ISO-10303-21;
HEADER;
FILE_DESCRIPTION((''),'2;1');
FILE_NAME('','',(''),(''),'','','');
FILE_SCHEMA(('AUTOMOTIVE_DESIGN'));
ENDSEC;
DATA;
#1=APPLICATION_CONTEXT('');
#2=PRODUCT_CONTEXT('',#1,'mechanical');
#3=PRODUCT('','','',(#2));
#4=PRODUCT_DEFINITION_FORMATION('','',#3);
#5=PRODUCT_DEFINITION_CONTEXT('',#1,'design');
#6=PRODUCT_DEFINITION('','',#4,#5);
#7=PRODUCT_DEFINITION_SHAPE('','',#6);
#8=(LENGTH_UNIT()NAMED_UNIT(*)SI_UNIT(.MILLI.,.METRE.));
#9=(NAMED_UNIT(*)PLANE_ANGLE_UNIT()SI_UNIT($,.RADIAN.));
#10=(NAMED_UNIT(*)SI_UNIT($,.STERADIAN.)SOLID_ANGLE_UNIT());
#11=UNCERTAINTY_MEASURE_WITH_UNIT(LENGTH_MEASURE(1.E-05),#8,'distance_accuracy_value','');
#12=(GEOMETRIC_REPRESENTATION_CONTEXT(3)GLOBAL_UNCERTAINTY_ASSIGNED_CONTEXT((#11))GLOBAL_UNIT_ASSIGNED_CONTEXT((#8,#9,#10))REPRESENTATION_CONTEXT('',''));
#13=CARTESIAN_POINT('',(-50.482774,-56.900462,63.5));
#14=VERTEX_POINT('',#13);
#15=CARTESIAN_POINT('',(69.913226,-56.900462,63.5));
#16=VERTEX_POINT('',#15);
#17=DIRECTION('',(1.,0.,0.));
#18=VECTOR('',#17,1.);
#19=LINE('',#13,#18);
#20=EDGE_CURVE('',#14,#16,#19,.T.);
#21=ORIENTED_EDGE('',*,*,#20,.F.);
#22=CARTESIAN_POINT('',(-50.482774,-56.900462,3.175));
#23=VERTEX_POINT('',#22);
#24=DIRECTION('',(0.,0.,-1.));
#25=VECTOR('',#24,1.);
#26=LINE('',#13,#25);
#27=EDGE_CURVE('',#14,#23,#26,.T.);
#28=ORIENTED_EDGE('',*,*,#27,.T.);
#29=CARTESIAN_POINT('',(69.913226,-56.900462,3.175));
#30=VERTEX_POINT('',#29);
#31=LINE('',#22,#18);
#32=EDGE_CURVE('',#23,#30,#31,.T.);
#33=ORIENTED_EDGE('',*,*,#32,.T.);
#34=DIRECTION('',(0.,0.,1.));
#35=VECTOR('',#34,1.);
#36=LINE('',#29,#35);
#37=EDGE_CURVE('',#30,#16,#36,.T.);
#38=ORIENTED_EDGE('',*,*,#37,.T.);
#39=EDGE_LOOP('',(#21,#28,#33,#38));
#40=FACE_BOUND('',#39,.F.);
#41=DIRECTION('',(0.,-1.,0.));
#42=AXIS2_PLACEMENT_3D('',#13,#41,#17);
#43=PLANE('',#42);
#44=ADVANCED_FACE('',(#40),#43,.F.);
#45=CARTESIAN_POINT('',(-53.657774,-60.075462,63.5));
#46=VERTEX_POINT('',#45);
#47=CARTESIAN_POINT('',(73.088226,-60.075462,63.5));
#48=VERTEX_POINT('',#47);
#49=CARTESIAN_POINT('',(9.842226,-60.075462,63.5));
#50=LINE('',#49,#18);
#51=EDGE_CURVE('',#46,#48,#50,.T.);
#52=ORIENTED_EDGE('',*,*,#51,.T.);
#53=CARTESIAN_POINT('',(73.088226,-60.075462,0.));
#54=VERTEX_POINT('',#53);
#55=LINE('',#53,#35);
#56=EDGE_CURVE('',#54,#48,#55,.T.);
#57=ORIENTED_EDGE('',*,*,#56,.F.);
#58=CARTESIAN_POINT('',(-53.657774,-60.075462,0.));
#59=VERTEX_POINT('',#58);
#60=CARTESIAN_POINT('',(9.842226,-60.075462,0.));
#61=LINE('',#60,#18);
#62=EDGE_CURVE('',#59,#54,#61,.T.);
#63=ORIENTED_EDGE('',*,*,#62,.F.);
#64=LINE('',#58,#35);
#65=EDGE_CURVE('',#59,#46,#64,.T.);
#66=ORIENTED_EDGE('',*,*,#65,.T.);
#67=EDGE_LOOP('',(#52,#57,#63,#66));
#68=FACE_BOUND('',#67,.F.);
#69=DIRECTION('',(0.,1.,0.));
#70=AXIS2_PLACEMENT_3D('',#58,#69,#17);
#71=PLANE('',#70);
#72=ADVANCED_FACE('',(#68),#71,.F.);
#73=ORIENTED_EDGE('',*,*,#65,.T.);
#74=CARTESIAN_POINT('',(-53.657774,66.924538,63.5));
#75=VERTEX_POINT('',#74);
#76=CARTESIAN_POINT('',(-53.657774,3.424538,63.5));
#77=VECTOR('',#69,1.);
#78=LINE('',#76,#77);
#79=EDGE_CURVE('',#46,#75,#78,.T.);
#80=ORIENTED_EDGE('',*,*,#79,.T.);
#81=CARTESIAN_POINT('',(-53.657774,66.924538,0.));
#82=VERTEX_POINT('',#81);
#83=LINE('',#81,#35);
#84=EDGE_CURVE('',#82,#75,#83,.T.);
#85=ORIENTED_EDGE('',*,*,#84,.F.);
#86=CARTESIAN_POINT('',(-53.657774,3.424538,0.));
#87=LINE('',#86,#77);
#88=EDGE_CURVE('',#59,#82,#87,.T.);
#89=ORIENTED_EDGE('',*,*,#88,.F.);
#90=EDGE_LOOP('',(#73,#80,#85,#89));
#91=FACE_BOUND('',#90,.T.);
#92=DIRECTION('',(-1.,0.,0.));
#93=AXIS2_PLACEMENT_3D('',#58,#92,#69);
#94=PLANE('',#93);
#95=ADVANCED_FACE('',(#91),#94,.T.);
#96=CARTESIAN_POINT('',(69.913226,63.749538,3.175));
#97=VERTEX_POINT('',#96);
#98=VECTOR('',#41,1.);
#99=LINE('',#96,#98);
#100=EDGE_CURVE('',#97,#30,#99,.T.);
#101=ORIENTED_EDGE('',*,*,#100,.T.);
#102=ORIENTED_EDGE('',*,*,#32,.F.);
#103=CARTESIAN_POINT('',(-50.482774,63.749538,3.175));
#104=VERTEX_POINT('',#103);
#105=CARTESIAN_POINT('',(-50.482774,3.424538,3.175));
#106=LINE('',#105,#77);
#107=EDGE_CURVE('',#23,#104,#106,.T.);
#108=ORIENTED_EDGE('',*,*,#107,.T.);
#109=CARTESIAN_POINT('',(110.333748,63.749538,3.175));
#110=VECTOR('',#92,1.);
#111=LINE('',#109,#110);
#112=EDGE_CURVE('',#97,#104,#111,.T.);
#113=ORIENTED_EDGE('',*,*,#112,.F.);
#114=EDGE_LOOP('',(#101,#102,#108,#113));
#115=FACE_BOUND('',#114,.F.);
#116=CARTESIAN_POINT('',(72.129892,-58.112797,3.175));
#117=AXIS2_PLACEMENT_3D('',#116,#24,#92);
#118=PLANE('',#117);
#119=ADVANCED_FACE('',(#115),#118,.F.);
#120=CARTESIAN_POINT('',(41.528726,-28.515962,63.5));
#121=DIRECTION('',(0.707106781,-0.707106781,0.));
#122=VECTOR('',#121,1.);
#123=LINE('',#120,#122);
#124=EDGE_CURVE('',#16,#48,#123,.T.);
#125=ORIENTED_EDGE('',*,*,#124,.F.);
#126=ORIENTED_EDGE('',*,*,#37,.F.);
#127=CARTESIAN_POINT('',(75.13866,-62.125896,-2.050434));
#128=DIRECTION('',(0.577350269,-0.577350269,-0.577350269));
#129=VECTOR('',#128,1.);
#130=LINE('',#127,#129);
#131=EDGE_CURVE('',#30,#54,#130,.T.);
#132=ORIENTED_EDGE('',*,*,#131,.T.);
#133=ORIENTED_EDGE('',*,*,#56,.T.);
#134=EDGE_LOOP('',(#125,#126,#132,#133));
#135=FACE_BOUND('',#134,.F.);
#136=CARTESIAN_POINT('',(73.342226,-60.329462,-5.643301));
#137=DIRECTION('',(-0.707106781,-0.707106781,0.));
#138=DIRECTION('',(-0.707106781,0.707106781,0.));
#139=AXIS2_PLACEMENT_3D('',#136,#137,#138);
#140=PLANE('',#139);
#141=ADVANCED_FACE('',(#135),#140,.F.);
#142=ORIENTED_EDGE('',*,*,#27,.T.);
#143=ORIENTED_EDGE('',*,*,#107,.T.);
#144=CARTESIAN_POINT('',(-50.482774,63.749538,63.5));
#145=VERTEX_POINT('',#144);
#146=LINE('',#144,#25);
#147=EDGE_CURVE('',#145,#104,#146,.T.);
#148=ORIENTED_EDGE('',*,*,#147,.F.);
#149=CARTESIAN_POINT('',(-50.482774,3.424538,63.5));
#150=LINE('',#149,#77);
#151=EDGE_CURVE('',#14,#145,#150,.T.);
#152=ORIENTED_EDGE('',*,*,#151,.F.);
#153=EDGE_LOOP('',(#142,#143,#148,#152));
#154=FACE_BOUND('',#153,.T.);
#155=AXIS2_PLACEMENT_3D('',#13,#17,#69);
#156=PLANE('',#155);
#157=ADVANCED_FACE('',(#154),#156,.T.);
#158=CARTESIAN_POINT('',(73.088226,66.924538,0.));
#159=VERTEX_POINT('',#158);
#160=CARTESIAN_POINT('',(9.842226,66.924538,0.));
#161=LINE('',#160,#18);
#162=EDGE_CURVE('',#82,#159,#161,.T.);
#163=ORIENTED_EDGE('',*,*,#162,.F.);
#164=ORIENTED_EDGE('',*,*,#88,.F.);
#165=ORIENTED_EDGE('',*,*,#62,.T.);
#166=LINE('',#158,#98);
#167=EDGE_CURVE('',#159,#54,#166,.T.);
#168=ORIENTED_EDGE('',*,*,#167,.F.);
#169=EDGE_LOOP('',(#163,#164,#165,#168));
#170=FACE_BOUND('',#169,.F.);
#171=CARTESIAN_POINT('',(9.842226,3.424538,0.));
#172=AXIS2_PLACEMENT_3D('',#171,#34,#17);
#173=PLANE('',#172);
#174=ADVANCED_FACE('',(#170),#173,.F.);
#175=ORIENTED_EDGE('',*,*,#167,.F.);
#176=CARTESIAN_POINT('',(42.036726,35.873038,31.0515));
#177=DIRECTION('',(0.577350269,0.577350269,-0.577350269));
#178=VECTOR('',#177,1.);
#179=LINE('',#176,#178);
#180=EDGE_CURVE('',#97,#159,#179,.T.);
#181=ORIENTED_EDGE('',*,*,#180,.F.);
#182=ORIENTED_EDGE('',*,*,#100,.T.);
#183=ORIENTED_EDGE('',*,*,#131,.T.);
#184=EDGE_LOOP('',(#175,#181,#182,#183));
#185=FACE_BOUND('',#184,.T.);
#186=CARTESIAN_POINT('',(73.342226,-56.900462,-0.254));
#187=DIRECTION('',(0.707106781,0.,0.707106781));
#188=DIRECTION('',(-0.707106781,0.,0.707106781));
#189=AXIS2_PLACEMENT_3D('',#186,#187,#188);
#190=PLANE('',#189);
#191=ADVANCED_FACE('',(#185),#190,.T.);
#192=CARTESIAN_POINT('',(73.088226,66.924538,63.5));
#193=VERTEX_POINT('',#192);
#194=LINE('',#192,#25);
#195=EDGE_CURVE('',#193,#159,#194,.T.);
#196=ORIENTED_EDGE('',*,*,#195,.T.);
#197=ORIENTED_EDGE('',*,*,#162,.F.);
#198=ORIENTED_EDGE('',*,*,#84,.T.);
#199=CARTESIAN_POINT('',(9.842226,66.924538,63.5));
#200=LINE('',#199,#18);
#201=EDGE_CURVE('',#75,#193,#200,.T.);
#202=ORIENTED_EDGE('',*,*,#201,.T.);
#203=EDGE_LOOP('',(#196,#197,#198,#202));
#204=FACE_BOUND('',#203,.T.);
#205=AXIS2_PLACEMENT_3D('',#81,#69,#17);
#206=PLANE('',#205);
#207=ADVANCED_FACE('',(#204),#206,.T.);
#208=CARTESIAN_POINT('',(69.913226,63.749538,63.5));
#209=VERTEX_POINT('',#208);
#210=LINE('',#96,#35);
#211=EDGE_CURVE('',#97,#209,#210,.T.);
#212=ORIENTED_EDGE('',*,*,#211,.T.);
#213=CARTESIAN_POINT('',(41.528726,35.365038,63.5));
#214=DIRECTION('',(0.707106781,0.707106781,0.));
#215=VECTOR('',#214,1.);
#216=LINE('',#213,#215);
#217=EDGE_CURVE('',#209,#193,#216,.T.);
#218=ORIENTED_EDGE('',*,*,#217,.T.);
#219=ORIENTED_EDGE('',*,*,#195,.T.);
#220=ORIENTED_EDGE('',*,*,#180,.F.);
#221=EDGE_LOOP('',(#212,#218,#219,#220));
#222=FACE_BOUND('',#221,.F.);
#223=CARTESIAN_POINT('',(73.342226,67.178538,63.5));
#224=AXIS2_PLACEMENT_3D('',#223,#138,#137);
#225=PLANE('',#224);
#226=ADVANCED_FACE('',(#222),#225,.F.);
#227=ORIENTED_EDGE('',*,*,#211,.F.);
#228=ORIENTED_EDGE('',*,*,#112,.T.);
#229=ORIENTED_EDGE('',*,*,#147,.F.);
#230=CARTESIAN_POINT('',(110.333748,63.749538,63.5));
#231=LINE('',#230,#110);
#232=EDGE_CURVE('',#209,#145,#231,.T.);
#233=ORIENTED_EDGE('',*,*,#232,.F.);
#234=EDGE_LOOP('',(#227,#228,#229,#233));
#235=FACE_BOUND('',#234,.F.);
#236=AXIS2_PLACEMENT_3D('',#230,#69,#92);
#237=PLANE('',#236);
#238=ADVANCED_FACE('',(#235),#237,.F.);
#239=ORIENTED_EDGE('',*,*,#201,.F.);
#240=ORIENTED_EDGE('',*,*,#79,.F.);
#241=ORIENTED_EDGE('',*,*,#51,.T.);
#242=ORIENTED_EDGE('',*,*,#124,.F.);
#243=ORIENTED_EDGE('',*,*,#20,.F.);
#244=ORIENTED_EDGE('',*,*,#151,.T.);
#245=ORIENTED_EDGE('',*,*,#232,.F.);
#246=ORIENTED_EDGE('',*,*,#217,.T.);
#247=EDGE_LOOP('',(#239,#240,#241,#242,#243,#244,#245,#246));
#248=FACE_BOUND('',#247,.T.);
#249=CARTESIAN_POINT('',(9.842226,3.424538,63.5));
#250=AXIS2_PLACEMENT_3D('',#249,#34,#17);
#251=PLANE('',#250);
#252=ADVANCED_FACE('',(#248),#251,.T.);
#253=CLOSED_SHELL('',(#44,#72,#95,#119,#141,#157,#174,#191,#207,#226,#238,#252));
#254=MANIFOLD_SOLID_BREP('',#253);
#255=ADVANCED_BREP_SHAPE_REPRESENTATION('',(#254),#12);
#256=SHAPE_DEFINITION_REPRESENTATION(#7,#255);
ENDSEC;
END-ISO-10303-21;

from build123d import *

# Parameters (mm, degrees)
F0_W         = 127
F0_H         = 127
F1_DEPTH     = 63.5
F2_W         = 120.65
F2_H         = 120.65
F2_W_2       = 40.16652188
F3_DEPTH     = 60.325
F4_T1_DEPTH  = 69.1433009657
F4_T3_DEPTH  = 120.65
F4_T9_DEPTH  = 129.4683009657
F4_T15_DEPTH = 69.1433009657
F4_T24_DEPTH = 69.1433009657
F4_T30_DEPTH = 129.4683009657


# Not quite as in the source:
# - a fillet or chamfer that OpenCascade refuses, or shapes differently, is made with other operations: its cross-section is extruded or revolved along the edge and cut away or added


with BuildPart() as f1:
    # F0 (on Top) → F1 (new body)
    with BuildSketch(Plane.XY):
        with Locations((9.8422262818, 3.4245376295)):
            Rectangle(F0_W, F0_H)
    extrude(amount=F1_DEPTH)

    # F2 (on face) → F3 (cut)
    with BuildSketch(Plane.XY.offset(63.5)):
        with Locations((9.8422262818, 3.4245376295)):
            Rectangle(F2_W, F2_H)
        with Locations((90.2504872218, 3.4245376295)):
            Rectangle(F2_W_2, F2_H)
    extrude(amount=-F3_DEPTH, mode=Mode.SUBTRACT)

    # F4: chamfer of 3.429 on 3 edges, made by hand

    # F4_s2 → F4_t1 (cut)
    with BuildSketch(Plane.XY.offset(3.175)):
        Polygon((73.3422262818, -60.3294623705), (69.9132262818, -56.9004623705), (73.3422262818, -56.9004623705), align=None)
        Polygon((73.3422262818, 67.1785376295), (69.9132262818, 63.7495376295), (73.3422262818, 63.7495376295), align=None)
    extrude(amount=F4_T1_DEPTH, mode=Mode.SUBTRACT)

    # F4_s4 → F4_t3 (cut)
    with BuildSketch(Plane.XZ.offset(-63.7495376295)):
        Polygon((73.3422262818, -0.254), (69.9132262818, 3.175), (73.3422262818, 3.175), align=None)
    extrude(amount=F4_T3_DEPTH, mode=Mode.SUBTRACT)


with BuildPart() as f4_tool7:
    # F4_s8 → F4_t9 (new body)
    with BuildSketch(Plane.XZ.offset(65.7187633362)):
        Polygon((73.3422262818, -0.254), (69.9132262818, 3.175), (73.3422262818, 3.175), align=None)
    extrude(amount=-F4_T9_DEPTH)

    split(bisect_by=Plane.XZ.offset(60.0754623705), keep=Keep.BOTTOM)

    split(bisect_by=Plane.XY, keep=Keep.TOP)

    split(bisect_by=Plane.XZ.offset(56.9004623705), keep=Keep.TOP)


with BuildPart() as f4_tool13:
    # F4_s14 → F4_t15 (new body)
    with BuildSketch(Plane.XY.offset(-5.6433009657)):
        Polygon((73.3422262818, -60.3294623705), (69.9132262818, -56.9004623705), (73.3422262818, -56.9004623705), align=None)
    extrude(amount=F4_T15_DEPTH)

    split(bisect_by=Plane.XZ.offset(60.0754623705), keep=Keep.BOTTOM)

    split(bisect_by=Plane.XY, keep=Keep.TOP)

    split(bisect_by=Plane.XY.offset(3.175), keep=Keep.BOTTOM)


with BuildPart() as f4_tool7_1:
    add(f4_tool7.part)

    # F4_t19: intersect F4_tool13
    add(f4_tool13.part, mode=Mode.INTERSECT)


with BuildPart() as f1_1:
    add(f1.part)

    # F4_t5: cut F4_tool7
    add(f4_tool7_1.part, mode=Mode.SUBTRACT)


with BuildPart() as f4_tool22:
    # F4_s23 → F4_t24 (new body)
    with BuildSketch(Plane.XY.offset(63.5)):
        Polygon((73.3422262818, 67.1785376295), (69.9132262818, 63.7495376295), (73.3422262818, 63.7495376295), align=None)
    extrude(amount=-F4_T24_DEPTH)

    split(bisect_by=Plane.XY, keep=Keep.TOP)

    split(bisect_by=Plane.XZ.offset(-66.9245376295), keep=Keep.TOP)

    split(bisect_by=Plane.XY.offset(3.175), keep=Keep.BOTTOM)


with BuildPart() as f4_tool28:
    # F4_s29 → F4_t30 (new body)
    with BuildSketch(Plane.XZ.offset(56.9004623705)):
        Polygon((73.3422262818, -0.254), (69.9132262818, 3.175), (73.3422262818, 3.175), align=None)
    extrude(amount=-F4_T30_DEPTH)

    split(bisect_by=Plane.XY, keep=Keep.TOP)

    split(bisect_by=Plane.XZ.offset(-66.9245376295), keep=Keep.TOP)

    split(bisect_by=Plane.XZ.offset(-63.7495376295), keep=Keep.BOTTOM)


with BuildPart() as f4_tool22_1:
    add(f4_tool22.part)

    # F4_t34: intersect F4_tool28
    add(f4_tool28.part, mode=Mode.INTERSECT)


with BuildPart() as f1_2:
    add(f1_1.part)

    # F4_t20: cut F4_tool22
    add(f4_tool22_1.part, mode=Mode.SUBTRACT)


solid = f1_2.part
